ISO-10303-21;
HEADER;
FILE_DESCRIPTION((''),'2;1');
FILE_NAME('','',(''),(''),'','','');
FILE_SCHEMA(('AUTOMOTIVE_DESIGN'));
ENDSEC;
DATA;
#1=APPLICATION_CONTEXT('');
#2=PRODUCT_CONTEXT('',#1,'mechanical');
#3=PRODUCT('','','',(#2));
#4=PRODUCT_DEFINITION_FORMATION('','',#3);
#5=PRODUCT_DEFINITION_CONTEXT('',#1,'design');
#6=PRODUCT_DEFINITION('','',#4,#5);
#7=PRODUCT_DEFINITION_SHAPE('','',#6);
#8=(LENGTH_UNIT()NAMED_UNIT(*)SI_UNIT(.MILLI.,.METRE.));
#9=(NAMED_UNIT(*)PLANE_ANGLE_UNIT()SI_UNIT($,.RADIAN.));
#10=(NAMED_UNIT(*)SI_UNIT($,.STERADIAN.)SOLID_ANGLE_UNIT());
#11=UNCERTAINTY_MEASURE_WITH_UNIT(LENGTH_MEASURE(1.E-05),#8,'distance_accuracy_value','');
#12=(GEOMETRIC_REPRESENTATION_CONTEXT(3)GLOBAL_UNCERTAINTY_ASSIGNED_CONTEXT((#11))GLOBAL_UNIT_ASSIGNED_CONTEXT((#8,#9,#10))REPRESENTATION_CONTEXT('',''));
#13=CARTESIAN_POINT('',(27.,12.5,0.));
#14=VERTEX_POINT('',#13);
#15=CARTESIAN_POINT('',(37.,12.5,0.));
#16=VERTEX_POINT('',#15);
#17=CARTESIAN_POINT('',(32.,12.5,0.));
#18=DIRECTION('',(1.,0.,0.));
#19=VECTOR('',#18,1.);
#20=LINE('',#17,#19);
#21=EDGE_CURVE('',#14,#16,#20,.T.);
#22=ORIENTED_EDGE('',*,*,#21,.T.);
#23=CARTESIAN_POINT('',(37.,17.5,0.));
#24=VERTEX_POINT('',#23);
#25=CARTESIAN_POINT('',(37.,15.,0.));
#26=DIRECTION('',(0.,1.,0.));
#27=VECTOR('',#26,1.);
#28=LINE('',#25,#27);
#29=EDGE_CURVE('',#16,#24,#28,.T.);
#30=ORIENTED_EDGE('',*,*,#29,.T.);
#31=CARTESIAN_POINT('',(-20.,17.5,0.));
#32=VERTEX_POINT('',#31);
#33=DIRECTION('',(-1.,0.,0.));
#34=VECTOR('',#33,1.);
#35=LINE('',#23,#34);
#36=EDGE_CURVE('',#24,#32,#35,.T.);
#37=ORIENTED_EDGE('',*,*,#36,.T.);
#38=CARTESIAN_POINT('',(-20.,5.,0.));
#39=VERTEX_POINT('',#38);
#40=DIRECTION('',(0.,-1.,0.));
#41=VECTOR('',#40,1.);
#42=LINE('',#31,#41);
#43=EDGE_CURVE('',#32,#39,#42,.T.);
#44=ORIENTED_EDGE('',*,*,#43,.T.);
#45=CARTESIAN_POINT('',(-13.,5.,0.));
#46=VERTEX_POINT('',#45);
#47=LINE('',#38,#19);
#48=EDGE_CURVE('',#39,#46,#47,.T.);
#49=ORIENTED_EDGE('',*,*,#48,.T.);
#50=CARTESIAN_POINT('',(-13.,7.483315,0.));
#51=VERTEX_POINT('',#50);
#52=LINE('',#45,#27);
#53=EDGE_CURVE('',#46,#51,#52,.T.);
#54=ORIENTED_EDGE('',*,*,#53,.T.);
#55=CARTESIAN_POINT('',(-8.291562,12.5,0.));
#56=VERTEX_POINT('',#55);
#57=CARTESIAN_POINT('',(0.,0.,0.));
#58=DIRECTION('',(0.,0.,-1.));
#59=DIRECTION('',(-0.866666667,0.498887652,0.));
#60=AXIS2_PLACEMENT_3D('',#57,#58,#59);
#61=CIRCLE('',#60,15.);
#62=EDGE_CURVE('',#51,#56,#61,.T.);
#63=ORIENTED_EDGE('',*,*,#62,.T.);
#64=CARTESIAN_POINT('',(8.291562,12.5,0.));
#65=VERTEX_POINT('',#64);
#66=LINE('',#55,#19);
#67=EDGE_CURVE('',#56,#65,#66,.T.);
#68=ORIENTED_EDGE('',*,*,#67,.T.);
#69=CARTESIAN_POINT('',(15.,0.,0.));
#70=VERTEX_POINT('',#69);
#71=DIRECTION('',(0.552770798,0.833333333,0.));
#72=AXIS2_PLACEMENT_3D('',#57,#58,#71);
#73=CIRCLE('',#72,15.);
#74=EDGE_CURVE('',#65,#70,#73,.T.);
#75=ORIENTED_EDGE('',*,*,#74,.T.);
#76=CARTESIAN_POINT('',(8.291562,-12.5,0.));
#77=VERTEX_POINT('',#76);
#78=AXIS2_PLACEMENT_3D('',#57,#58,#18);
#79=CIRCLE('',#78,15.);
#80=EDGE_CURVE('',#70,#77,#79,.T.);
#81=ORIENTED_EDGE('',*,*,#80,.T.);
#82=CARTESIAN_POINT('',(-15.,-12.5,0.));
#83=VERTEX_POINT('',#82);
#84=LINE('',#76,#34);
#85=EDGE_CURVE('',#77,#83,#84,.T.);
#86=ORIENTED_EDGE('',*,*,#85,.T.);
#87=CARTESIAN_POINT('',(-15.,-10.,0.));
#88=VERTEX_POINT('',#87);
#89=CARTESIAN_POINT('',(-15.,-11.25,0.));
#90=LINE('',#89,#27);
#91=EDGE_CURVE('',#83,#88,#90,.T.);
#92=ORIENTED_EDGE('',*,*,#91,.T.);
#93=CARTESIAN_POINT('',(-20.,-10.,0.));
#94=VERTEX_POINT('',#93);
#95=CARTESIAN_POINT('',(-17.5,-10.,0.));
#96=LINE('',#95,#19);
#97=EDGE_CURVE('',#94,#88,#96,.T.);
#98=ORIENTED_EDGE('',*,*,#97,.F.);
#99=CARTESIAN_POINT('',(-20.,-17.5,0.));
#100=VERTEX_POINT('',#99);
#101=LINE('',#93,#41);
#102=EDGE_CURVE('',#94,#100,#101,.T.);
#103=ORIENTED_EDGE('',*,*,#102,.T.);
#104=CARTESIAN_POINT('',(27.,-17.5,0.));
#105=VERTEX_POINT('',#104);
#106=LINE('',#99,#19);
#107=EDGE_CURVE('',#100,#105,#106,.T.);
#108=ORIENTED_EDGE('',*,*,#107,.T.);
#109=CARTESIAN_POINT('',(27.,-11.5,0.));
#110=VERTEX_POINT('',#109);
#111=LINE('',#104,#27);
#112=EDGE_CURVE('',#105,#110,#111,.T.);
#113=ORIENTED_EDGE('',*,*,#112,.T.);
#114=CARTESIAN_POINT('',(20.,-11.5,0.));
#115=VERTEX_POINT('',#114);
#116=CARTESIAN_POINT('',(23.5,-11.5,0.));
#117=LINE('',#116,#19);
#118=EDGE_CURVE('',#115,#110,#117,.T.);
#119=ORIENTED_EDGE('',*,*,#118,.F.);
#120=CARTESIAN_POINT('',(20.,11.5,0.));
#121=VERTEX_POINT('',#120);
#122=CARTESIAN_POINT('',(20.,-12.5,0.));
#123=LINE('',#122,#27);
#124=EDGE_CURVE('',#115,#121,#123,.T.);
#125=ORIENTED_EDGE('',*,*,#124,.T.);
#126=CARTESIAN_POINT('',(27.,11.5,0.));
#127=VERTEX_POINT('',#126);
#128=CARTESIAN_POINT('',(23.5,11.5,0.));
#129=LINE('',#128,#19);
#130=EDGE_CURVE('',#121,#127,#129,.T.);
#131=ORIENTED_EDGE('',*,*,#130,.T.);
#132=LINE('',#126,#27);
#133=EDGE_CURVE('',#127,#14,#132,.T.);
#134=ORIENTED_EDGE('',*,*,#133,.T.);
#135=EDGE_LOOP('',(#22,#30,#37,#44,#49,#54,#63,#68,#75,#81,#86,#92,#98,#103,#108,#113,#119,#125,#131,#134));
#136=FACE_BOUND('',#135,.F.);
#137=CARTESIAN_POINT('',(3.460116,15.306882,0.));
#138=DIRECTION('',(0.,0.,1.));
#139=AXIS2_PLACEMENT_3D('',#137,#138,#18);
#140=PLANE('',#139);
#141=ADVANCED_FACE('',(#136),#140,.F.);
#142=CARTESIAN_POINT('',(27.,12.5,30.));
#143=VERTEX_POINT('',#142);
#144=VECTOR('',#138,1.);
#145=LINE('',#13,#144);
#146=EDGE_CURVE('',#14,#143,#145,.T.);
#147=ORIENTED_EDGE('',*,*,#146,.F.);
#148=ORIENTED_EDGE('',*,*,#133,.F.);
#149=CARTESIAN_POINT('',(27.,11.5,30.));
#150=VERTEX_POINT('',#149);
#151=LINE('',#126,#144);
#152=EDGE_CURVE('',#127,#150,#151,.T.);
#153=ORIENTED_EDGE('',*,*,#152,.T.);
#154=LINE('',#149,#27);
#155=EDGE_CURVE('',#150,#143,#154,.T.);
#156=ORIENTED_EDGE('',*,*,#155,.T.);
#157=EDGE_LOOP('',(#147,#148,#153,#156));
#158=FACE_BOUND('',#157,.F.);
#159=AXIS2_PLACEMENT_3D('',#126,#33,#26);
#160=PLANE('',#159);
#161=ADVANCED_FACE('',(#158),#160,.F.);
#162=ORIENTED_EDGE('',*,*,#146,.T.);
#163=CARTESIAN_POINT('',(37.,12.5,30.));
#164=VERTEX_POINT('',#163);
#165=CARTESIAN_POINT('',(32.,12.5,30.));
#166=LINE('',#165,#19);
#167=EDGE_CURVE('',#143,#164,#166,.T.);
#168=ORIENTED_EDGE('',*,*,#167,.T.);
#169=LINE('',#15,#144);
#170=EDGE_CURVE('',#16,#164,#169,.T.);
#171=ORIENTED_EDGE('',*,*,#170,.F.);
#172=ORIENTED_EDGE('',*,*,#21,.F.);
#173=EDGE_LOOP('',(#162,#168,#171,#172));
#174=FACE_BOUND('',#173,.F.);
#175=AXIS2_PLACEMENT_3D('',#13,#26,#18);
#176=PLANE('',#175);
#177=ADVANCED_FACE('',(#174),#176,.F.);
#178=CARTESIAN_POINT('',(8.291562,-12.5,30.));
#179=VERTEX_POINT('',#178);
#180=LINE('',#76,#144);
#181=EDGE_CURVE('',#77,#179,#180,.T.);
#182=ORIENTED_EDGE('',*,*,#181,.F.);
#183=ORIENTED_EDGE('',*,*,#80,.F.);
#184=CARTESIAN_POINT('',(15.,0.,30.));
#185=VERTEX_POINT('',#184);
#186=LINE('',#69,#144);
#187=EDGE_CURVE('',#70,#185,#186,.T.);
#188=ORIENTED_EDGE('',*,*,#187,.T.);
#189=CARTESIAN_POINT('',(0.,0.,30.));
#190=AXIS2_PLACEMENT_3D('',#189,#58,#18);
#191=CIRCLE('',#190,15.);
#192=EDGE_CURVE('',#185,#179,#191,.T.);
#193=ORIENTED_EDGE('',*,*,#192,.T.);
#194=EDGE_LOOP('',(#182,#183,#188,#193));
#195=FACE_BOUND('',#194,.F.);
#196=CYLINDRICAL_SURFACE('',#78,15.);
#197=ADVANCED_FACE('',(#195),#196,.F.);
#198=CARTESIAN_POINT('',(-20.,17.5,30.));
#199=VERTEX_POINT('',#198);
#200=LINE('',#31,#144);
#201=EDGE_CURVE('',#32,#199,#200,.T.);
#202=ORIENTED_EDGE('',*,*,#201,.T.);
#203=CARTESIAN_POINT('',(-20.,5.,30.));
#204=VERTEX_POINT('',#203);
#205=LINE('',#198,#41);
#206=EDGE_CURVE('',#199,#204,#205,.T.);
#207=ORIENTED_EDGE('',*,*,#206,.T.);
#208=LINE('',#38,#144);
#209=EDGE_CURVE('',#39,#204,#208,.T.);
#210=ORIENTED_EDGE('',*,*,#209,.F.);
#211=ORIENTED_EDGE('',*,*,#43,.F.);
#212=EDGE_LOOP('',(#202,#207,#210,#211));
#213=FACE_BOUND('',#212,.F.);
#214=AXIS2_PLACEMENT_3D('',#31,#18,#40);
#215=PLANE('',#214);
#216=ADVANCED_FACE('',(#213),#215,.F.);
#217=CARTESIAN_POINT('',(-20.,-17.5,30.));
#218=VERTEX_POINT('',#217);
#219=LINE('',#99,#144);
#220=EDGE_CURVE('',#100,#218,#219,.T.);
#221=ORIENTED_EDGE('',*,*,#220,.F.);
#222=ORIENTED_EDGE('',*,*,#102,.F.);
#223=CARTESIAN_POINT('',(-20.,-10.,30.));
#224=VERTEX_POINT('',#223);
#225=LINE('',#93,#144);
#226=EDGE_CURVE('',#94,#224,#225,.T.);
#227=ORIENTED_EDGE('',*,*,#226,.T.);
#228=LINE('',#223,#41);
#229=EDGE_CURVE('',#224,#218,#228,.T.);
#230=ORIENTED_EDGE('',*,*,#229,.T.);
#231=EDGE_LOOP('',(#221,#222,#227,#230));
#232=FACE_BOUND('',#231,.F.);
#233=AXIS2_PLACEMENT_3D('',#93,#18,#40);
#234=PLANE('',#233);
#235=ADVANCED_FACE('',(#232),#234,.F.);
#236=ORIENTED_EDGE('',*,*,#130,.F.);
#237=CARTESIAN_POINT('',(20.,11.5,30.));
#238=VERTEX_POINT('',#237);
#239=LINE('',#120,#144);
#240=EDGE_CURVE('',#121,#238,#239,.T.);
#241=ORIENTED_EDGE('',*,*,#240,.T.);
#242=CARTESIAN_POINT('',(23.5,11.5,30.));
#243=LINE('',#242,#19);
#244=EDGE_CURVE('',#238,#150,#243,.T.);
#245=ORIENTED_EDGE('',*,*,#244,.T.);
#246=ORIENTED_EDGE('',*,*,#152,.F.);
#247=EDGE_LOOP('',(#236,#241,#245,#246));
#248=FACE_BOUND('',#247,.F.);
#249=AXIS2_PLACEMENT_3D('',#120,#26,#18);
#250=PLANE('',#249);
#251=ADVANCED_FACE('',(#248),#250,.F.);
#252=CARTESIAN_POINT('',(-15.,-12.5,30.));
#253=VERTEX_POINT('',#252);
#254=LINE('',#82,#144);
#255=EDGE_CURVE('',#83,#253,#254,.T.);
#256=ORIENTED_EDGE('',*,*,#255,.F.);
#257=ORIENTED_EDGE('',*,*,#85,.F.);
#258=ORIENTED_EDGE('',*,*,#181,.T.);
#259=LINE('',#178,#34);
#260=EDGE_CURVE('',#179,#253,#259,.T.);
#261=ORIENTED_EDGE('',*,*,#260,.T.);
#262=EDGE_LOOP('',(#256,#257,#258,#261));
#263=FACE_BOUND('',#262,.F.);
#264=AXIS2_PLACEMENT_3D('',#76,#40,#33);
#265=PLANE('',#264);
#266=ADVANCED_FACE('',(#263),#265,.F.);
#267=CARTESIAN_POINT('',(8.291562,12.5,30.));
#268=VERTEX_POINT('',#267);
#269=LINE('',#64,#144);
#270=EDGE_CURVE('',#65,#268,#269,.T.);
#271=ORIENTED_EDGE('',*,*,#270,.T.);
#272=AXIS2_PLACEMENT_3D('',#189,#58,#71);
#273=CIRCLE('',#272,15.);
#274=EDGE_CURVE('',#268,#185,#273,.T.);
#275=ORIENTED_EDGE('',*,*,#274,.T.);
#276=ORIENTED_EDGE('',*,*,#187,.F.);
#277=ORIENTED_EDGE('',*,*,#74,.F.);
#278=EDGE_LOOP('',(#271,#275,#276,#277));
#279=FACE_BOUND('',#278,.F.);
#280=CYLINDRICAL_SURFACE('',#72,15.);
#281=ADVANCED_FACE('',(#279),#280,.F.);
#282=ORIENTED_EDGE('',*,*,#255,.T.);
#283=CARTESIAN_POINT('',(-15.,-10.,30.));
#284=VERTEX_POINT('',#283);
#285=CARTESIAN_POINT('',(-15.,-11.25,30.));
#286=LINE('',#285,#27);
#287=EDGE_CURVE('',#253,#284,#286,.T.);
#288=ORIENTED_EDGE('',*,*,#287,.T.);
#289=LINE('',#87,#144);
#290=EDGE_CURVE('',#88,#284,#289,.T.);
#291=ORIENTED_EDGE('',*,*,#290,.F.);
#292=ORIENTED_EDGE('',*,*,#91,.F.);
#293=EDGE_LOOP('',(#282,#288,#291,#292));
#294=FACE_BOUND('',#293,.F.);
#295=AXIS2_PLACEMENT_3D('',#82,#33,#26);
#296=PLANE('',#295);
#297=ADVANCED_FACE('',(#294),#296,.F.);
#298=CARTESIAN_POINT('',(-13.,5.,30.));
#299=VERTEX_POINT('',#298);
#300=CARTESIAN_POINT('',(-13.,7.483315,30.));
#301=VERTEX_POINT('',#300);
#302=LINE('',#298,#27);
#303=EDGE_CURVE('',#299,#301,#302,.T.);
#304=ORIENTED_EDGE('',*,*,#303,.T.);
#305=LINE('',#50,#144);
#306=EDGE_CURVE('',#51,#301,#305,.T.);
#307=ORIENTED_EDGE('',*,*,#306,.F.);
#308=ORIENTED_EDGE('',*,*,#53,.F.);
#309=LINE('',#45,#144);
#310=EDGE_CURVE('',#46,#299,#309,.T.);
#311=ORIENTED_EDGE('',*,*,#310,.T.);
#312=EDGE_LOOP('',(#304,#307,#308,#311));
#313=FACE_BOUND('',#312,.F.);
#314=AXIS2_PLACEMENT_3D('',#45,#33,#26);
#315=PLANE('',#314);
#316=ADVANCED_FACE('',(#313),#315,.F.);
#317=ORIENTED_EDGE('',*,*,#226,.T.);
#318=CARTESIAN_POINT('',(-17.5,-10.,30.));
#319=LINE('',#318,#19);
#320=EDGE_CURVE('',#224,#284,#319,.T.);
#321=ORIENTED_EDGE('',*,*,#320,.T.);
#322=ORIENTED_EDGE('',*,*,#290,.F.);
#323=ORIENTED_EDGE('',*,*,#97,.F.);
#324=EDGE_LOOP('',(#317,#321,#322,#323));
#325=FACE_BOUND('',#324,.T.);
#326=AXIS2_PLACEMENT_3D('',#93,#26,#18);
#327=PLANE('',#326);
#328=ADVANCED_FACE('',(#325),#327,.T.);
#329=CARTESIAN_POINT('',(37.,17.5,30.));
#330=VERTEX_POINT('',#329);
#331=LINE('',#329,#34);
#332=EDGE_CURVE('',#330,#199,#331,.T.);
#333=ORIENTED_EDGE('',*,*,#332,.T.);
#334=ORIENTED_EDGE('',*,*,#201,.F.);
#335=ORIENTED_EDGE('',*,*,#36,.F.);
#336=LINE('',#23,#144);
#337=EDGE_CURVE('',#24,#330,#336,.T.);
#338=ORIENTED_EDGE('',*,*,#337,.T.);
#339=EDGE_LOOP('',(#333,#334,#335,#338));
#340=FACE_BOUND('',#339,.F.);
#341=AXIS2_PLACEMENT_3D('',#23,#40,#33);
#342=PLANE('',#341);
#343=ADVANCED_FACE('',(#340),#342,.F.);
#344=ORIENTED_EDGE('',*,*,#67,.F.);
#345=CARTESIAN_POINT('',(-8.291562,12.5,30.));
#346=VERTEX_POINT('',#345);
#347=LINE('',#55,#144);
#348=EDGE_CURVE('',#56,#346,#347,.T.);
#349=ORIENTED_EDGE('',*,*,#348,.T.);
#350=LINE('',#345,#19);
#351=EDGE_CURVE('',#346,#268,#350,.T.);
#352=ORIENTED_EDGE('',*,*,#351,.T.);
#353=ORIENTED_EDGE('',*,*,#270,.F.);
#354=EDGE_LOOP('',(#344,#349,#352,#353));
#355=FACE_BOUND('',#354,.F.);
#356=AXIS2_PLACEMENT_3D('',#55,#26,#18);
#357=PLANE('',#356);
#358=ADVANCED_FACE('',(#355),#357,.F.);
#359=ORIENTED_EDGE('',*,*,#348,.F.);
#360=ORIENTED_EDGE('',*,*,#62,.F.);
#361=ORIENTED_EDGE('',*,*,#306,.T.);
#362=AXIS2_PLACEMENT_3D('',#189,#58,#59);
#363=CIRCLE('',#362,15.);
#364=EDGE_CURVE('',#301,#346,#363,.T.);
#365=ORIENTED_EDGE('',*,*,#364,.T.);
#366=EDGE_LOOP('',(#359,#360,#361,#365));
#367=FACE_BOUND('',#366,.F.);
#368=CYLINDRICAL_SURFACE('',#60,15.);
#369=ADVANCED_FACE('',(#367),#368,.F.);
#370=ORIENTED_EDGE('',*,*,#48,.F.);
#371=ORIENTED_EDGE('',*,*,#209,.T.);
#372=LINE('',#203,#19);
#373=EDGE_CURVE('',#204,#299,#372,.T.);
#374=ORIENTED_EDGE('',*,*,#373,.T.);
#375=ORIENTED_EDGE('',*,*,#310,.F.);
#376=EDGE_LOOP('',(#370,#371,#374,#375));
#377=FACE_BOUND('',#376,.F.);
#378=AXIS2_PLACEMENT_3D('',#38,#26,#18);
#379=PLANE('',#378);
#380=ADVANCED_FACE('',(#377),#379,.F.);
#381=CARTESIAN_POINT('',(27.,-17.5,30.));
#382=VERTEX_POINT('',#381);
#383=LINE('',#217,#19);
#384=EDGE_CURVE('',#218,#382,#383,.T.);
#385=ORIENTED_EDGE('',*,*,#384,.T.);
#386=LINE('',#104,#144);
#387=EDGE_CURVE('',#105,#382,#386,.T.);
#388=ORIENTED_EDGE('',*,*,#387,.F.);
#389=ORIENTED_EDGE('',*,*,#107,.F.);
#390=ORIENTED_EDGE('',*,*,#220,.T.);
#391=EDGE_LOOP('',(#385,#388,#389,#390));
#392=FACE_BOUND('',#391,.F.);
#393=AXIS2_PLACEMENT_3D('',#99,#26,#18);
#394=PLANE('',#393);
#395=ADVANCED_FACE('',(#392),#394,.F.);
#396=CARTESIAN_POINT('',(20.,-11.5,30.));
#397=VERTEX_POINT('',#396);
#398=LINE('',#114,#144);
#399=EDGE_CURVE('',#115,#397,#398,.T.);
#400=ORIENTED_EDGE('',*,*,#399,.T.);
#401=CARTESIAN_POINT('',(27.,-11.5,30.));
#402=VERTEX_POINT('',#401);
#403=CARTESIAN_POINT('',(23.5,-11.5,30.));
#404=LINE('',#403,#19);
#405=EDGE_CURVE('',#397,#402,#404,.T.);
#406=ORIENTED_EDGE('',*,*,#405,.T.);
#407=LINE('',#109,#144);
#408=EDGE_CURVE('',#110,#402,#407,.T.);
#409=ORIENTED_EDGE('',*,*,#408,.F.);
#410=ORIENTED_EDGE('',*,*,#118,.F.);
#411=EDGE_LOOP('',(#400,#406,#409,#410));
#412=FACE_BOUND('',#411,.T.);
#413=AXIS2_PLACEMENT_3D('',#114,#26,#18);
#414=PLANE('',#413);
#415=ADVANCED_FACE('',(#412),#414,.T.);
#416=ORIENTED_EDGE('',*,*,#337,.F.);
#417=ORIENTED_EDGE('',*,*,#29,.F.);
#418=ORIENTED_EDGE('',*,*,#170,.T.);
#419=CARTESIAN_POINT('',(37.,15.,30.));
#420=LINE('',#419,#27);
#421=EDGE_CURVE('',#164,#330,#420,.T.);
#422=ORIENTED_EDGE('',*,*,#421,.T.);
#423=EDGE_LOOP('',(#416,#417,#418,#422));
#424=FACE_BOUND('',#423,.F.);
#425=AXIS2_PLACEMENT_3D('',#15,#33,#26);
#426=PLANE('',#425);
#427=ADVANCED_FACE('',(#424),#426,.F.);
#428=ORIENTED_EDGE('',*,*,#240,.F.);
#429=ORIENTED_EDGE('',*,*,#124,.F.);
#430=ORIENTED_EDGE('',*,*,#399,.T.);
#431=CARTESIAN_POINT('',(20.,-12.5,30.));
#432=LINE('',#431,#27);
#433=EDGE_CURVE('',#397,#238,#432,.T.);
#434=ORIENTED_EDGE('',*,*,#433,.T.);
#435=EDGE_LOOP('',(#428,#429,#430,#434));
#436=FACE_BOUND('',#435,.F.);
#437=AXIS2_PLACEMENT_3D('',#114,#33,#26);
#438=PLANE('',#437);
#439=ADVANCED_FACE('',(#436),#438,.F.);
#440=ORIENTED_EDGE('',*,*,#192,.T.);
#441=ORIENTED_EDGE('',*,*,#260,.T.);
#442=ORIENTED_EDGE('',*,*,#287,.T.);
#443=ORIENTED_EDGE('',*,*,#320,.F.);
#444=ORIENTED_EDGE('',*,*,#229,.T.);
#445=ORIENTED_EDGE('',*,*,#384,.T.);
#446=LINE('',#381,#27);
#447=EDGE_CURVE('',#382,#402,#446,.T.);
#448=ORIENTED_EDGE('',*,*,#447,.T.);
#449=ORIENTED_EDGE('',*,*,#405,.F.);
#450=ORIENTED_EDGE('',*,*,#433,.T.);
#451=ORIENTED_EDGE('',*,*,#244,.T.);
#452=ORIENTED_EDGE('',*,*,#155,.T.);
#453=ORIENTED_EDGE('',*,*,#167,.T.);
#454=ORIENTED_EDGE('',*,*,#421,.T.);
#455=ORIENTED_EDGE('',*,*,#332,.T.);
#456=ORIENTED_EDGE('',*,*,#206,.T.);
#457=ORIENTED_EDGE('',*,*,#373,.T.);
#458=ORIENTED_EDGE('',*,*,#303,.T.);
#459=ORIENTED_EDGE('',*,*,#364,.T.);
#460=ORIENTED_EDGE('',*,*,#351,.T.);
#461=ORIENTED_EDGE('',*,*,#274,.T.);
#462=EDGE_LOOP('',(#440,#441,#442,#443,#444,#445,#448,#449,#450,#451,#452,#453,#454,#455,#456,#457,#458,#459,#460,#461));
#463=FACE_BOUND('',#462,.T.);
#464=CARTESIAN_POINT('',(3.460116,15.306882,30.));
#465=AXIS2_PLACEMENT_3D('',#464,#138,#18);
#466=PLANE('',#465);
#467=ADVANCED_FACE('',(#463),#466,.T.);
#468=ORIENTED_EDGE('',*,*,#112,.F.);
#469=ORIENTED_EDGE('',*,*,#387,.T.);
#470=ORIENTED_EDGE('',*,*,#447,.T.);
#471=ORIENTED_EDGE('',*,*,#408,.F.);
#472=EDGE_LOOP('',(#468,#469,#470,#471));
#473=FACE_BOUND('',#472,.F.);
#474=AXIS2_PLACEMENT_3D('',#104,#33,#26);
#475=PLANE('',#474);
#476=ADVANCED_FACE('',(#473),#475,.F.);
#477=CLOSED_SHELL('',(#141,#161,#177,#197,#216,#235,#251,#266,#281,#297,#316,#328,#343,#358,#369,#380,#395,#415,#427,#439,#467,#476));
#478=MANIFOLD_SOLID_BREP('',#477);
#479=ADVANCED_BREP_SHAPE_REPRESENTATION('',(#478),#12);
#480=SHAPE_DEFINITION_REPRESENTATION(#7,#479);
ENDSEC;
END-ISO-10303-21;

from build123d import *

# Parameters (mm, degrees)
F0_W     = 7
F0_H     = 5
F0_H_2   = 1
F0_W_2   = 10
F0_W_3   = 5
F0_H_3   = 2.5
F1_DEPTH = 30


with BuildPart() as f1:
    # F0 (on Top) → F1 (new body)
    with BuildSketch(Plane.XY):
        with BuildLine():
            Line((20, 12.5), (20, 17.5))
            Line((20, 17.5), (-13, 17.5))
            Line((-13, 17.5), (-13, 12.5))
            Line((-13, 12.5), (-8.2915619759, 12.5))
            ThreePointArc((-8.2915619759, 12.5), (0, 15), (8.2915619759, 12.5))
            Line((8.2915619759, 12.5), (20, 12.5))
        make_face()
        with Locations((23.5, 15)):
            Rectangle(F0_W, F0_H)
        with Locations((-16.5, 15)):
            Rectangle(F0_W, F0_H)
        with Locations((23.5, 12)):
            Rectangle(F0_W, F0_H_2)
        with BuildLine():
            Line((20, 11.5), (20, 12.5))
            Line((20, 12.5), (8.2915619759, 12.5))
            ThreePointArc((8.2915619759, 12.5), (13.2169101843, 7.0931858273), (15, 0))
            ThreePointArc((15, 0), (13.2169101843, -7.0931858273), (8.2915619759, -12.5))
            Line((8.2915619759, -12.5), (20, -12.5))
            Line((20, -12.5), (20, -11.5))
            Line((20, -11.5), (20, 11.5))
        make_face()
        with Locations((32, 15)):
            Rectangle(F0_W_2, F0_H)
        with BuildLine():
            Line((-13, 7.4833147735), (-13, 12.5))
            Line((-13, 12.5), (-20, 12.5))
            Line((-20, 12.5), (-20, 5))
            Line((-20, 5), (-14.1421356237, 5))
            ThreePointArc((-14.1421356237, 5), (-13.627750901, 6.2677272898), (-13, 7.4833147735))
        make_face()
        with BuildLine():
            Line((-8.2915619759, 12.5), (-13, 12.5))
            Line((-13, 12.5), (-13, 7.4833147735))
            ThreePointArc((-13, 7.4833147735), (-10.9372956213, 10.2652600791), (-8.2915619759, 12.5))
        make_face()
        with BuildLine():
            Line((-8.2915619759, 12.5), (8.2915619759, 12.5))
            ThreePointArc((8.2915619759, 12.5), (0, 15), (-8.2915619759, 12.5))
        make_face()
        with BuildLine():
            Line((-13, 5), (-13, 7.4833147735))
            ThreePointArc((-13, 7.4833147735), (-13.627750901, 6.2677272898), (-14.1421356237, 5))
            Line((-14.1421356237, 5), (-13, 5))
        make_face()
        with Locations((23.5, -12)):
            Rectangle(F0_W, F0_H_2)
        with Locations((23.5, -15)):
            Rectangle(F0_W, F0_H)
        with BuildLine():
            Line((20, -17.5), (20, -12.5))
            Line((20, -12.5), (8.2915619759, -12.5))
            ThreePointArc((8.2915619759, -12.5), (4.3301270189, -14.3614066163), (0, -15))
            Line((0, -15), (-15, -15))
            Line((-15, -15), (-15, -17.5))
            Line((-15, -17.5), (20, -17.5))
        make_face()
        with BuildLine():
            ThreePointArc((0, -15), (4.3301270189, -14.3614066163), (8.2915619759, -12.5))
            Line((8.2915619759, -12.5), (-8.2915619759, -12.5))
            ThreePointArc((-8.2915619759, -12.5), (-4.3301270189, -14.3614066163), (0, -15))
        make_face()
        with Locations((-17.5, -11.25)):
            Rectangle(F0_W_3, F0_H_3)
        with BuildLine():
            ThreePointArc((0, -15), (-4.3301270189, -14.3614066163), (-8.2915619759, -12.5))
            Line((-8.2915619759, -12.5), (-15, -12.5))
            Line((-15, -12.5), (-15, -15))
            Line((-15, -15), (0, -15))
        make_face()
        Polygon((-15, -12.5), (-20, -12.5), (-20, -17.5), (-15, -17.5), (-15, -15), align=None)
    extrude(amount=F1_DEPTH)


solid = f1.part
